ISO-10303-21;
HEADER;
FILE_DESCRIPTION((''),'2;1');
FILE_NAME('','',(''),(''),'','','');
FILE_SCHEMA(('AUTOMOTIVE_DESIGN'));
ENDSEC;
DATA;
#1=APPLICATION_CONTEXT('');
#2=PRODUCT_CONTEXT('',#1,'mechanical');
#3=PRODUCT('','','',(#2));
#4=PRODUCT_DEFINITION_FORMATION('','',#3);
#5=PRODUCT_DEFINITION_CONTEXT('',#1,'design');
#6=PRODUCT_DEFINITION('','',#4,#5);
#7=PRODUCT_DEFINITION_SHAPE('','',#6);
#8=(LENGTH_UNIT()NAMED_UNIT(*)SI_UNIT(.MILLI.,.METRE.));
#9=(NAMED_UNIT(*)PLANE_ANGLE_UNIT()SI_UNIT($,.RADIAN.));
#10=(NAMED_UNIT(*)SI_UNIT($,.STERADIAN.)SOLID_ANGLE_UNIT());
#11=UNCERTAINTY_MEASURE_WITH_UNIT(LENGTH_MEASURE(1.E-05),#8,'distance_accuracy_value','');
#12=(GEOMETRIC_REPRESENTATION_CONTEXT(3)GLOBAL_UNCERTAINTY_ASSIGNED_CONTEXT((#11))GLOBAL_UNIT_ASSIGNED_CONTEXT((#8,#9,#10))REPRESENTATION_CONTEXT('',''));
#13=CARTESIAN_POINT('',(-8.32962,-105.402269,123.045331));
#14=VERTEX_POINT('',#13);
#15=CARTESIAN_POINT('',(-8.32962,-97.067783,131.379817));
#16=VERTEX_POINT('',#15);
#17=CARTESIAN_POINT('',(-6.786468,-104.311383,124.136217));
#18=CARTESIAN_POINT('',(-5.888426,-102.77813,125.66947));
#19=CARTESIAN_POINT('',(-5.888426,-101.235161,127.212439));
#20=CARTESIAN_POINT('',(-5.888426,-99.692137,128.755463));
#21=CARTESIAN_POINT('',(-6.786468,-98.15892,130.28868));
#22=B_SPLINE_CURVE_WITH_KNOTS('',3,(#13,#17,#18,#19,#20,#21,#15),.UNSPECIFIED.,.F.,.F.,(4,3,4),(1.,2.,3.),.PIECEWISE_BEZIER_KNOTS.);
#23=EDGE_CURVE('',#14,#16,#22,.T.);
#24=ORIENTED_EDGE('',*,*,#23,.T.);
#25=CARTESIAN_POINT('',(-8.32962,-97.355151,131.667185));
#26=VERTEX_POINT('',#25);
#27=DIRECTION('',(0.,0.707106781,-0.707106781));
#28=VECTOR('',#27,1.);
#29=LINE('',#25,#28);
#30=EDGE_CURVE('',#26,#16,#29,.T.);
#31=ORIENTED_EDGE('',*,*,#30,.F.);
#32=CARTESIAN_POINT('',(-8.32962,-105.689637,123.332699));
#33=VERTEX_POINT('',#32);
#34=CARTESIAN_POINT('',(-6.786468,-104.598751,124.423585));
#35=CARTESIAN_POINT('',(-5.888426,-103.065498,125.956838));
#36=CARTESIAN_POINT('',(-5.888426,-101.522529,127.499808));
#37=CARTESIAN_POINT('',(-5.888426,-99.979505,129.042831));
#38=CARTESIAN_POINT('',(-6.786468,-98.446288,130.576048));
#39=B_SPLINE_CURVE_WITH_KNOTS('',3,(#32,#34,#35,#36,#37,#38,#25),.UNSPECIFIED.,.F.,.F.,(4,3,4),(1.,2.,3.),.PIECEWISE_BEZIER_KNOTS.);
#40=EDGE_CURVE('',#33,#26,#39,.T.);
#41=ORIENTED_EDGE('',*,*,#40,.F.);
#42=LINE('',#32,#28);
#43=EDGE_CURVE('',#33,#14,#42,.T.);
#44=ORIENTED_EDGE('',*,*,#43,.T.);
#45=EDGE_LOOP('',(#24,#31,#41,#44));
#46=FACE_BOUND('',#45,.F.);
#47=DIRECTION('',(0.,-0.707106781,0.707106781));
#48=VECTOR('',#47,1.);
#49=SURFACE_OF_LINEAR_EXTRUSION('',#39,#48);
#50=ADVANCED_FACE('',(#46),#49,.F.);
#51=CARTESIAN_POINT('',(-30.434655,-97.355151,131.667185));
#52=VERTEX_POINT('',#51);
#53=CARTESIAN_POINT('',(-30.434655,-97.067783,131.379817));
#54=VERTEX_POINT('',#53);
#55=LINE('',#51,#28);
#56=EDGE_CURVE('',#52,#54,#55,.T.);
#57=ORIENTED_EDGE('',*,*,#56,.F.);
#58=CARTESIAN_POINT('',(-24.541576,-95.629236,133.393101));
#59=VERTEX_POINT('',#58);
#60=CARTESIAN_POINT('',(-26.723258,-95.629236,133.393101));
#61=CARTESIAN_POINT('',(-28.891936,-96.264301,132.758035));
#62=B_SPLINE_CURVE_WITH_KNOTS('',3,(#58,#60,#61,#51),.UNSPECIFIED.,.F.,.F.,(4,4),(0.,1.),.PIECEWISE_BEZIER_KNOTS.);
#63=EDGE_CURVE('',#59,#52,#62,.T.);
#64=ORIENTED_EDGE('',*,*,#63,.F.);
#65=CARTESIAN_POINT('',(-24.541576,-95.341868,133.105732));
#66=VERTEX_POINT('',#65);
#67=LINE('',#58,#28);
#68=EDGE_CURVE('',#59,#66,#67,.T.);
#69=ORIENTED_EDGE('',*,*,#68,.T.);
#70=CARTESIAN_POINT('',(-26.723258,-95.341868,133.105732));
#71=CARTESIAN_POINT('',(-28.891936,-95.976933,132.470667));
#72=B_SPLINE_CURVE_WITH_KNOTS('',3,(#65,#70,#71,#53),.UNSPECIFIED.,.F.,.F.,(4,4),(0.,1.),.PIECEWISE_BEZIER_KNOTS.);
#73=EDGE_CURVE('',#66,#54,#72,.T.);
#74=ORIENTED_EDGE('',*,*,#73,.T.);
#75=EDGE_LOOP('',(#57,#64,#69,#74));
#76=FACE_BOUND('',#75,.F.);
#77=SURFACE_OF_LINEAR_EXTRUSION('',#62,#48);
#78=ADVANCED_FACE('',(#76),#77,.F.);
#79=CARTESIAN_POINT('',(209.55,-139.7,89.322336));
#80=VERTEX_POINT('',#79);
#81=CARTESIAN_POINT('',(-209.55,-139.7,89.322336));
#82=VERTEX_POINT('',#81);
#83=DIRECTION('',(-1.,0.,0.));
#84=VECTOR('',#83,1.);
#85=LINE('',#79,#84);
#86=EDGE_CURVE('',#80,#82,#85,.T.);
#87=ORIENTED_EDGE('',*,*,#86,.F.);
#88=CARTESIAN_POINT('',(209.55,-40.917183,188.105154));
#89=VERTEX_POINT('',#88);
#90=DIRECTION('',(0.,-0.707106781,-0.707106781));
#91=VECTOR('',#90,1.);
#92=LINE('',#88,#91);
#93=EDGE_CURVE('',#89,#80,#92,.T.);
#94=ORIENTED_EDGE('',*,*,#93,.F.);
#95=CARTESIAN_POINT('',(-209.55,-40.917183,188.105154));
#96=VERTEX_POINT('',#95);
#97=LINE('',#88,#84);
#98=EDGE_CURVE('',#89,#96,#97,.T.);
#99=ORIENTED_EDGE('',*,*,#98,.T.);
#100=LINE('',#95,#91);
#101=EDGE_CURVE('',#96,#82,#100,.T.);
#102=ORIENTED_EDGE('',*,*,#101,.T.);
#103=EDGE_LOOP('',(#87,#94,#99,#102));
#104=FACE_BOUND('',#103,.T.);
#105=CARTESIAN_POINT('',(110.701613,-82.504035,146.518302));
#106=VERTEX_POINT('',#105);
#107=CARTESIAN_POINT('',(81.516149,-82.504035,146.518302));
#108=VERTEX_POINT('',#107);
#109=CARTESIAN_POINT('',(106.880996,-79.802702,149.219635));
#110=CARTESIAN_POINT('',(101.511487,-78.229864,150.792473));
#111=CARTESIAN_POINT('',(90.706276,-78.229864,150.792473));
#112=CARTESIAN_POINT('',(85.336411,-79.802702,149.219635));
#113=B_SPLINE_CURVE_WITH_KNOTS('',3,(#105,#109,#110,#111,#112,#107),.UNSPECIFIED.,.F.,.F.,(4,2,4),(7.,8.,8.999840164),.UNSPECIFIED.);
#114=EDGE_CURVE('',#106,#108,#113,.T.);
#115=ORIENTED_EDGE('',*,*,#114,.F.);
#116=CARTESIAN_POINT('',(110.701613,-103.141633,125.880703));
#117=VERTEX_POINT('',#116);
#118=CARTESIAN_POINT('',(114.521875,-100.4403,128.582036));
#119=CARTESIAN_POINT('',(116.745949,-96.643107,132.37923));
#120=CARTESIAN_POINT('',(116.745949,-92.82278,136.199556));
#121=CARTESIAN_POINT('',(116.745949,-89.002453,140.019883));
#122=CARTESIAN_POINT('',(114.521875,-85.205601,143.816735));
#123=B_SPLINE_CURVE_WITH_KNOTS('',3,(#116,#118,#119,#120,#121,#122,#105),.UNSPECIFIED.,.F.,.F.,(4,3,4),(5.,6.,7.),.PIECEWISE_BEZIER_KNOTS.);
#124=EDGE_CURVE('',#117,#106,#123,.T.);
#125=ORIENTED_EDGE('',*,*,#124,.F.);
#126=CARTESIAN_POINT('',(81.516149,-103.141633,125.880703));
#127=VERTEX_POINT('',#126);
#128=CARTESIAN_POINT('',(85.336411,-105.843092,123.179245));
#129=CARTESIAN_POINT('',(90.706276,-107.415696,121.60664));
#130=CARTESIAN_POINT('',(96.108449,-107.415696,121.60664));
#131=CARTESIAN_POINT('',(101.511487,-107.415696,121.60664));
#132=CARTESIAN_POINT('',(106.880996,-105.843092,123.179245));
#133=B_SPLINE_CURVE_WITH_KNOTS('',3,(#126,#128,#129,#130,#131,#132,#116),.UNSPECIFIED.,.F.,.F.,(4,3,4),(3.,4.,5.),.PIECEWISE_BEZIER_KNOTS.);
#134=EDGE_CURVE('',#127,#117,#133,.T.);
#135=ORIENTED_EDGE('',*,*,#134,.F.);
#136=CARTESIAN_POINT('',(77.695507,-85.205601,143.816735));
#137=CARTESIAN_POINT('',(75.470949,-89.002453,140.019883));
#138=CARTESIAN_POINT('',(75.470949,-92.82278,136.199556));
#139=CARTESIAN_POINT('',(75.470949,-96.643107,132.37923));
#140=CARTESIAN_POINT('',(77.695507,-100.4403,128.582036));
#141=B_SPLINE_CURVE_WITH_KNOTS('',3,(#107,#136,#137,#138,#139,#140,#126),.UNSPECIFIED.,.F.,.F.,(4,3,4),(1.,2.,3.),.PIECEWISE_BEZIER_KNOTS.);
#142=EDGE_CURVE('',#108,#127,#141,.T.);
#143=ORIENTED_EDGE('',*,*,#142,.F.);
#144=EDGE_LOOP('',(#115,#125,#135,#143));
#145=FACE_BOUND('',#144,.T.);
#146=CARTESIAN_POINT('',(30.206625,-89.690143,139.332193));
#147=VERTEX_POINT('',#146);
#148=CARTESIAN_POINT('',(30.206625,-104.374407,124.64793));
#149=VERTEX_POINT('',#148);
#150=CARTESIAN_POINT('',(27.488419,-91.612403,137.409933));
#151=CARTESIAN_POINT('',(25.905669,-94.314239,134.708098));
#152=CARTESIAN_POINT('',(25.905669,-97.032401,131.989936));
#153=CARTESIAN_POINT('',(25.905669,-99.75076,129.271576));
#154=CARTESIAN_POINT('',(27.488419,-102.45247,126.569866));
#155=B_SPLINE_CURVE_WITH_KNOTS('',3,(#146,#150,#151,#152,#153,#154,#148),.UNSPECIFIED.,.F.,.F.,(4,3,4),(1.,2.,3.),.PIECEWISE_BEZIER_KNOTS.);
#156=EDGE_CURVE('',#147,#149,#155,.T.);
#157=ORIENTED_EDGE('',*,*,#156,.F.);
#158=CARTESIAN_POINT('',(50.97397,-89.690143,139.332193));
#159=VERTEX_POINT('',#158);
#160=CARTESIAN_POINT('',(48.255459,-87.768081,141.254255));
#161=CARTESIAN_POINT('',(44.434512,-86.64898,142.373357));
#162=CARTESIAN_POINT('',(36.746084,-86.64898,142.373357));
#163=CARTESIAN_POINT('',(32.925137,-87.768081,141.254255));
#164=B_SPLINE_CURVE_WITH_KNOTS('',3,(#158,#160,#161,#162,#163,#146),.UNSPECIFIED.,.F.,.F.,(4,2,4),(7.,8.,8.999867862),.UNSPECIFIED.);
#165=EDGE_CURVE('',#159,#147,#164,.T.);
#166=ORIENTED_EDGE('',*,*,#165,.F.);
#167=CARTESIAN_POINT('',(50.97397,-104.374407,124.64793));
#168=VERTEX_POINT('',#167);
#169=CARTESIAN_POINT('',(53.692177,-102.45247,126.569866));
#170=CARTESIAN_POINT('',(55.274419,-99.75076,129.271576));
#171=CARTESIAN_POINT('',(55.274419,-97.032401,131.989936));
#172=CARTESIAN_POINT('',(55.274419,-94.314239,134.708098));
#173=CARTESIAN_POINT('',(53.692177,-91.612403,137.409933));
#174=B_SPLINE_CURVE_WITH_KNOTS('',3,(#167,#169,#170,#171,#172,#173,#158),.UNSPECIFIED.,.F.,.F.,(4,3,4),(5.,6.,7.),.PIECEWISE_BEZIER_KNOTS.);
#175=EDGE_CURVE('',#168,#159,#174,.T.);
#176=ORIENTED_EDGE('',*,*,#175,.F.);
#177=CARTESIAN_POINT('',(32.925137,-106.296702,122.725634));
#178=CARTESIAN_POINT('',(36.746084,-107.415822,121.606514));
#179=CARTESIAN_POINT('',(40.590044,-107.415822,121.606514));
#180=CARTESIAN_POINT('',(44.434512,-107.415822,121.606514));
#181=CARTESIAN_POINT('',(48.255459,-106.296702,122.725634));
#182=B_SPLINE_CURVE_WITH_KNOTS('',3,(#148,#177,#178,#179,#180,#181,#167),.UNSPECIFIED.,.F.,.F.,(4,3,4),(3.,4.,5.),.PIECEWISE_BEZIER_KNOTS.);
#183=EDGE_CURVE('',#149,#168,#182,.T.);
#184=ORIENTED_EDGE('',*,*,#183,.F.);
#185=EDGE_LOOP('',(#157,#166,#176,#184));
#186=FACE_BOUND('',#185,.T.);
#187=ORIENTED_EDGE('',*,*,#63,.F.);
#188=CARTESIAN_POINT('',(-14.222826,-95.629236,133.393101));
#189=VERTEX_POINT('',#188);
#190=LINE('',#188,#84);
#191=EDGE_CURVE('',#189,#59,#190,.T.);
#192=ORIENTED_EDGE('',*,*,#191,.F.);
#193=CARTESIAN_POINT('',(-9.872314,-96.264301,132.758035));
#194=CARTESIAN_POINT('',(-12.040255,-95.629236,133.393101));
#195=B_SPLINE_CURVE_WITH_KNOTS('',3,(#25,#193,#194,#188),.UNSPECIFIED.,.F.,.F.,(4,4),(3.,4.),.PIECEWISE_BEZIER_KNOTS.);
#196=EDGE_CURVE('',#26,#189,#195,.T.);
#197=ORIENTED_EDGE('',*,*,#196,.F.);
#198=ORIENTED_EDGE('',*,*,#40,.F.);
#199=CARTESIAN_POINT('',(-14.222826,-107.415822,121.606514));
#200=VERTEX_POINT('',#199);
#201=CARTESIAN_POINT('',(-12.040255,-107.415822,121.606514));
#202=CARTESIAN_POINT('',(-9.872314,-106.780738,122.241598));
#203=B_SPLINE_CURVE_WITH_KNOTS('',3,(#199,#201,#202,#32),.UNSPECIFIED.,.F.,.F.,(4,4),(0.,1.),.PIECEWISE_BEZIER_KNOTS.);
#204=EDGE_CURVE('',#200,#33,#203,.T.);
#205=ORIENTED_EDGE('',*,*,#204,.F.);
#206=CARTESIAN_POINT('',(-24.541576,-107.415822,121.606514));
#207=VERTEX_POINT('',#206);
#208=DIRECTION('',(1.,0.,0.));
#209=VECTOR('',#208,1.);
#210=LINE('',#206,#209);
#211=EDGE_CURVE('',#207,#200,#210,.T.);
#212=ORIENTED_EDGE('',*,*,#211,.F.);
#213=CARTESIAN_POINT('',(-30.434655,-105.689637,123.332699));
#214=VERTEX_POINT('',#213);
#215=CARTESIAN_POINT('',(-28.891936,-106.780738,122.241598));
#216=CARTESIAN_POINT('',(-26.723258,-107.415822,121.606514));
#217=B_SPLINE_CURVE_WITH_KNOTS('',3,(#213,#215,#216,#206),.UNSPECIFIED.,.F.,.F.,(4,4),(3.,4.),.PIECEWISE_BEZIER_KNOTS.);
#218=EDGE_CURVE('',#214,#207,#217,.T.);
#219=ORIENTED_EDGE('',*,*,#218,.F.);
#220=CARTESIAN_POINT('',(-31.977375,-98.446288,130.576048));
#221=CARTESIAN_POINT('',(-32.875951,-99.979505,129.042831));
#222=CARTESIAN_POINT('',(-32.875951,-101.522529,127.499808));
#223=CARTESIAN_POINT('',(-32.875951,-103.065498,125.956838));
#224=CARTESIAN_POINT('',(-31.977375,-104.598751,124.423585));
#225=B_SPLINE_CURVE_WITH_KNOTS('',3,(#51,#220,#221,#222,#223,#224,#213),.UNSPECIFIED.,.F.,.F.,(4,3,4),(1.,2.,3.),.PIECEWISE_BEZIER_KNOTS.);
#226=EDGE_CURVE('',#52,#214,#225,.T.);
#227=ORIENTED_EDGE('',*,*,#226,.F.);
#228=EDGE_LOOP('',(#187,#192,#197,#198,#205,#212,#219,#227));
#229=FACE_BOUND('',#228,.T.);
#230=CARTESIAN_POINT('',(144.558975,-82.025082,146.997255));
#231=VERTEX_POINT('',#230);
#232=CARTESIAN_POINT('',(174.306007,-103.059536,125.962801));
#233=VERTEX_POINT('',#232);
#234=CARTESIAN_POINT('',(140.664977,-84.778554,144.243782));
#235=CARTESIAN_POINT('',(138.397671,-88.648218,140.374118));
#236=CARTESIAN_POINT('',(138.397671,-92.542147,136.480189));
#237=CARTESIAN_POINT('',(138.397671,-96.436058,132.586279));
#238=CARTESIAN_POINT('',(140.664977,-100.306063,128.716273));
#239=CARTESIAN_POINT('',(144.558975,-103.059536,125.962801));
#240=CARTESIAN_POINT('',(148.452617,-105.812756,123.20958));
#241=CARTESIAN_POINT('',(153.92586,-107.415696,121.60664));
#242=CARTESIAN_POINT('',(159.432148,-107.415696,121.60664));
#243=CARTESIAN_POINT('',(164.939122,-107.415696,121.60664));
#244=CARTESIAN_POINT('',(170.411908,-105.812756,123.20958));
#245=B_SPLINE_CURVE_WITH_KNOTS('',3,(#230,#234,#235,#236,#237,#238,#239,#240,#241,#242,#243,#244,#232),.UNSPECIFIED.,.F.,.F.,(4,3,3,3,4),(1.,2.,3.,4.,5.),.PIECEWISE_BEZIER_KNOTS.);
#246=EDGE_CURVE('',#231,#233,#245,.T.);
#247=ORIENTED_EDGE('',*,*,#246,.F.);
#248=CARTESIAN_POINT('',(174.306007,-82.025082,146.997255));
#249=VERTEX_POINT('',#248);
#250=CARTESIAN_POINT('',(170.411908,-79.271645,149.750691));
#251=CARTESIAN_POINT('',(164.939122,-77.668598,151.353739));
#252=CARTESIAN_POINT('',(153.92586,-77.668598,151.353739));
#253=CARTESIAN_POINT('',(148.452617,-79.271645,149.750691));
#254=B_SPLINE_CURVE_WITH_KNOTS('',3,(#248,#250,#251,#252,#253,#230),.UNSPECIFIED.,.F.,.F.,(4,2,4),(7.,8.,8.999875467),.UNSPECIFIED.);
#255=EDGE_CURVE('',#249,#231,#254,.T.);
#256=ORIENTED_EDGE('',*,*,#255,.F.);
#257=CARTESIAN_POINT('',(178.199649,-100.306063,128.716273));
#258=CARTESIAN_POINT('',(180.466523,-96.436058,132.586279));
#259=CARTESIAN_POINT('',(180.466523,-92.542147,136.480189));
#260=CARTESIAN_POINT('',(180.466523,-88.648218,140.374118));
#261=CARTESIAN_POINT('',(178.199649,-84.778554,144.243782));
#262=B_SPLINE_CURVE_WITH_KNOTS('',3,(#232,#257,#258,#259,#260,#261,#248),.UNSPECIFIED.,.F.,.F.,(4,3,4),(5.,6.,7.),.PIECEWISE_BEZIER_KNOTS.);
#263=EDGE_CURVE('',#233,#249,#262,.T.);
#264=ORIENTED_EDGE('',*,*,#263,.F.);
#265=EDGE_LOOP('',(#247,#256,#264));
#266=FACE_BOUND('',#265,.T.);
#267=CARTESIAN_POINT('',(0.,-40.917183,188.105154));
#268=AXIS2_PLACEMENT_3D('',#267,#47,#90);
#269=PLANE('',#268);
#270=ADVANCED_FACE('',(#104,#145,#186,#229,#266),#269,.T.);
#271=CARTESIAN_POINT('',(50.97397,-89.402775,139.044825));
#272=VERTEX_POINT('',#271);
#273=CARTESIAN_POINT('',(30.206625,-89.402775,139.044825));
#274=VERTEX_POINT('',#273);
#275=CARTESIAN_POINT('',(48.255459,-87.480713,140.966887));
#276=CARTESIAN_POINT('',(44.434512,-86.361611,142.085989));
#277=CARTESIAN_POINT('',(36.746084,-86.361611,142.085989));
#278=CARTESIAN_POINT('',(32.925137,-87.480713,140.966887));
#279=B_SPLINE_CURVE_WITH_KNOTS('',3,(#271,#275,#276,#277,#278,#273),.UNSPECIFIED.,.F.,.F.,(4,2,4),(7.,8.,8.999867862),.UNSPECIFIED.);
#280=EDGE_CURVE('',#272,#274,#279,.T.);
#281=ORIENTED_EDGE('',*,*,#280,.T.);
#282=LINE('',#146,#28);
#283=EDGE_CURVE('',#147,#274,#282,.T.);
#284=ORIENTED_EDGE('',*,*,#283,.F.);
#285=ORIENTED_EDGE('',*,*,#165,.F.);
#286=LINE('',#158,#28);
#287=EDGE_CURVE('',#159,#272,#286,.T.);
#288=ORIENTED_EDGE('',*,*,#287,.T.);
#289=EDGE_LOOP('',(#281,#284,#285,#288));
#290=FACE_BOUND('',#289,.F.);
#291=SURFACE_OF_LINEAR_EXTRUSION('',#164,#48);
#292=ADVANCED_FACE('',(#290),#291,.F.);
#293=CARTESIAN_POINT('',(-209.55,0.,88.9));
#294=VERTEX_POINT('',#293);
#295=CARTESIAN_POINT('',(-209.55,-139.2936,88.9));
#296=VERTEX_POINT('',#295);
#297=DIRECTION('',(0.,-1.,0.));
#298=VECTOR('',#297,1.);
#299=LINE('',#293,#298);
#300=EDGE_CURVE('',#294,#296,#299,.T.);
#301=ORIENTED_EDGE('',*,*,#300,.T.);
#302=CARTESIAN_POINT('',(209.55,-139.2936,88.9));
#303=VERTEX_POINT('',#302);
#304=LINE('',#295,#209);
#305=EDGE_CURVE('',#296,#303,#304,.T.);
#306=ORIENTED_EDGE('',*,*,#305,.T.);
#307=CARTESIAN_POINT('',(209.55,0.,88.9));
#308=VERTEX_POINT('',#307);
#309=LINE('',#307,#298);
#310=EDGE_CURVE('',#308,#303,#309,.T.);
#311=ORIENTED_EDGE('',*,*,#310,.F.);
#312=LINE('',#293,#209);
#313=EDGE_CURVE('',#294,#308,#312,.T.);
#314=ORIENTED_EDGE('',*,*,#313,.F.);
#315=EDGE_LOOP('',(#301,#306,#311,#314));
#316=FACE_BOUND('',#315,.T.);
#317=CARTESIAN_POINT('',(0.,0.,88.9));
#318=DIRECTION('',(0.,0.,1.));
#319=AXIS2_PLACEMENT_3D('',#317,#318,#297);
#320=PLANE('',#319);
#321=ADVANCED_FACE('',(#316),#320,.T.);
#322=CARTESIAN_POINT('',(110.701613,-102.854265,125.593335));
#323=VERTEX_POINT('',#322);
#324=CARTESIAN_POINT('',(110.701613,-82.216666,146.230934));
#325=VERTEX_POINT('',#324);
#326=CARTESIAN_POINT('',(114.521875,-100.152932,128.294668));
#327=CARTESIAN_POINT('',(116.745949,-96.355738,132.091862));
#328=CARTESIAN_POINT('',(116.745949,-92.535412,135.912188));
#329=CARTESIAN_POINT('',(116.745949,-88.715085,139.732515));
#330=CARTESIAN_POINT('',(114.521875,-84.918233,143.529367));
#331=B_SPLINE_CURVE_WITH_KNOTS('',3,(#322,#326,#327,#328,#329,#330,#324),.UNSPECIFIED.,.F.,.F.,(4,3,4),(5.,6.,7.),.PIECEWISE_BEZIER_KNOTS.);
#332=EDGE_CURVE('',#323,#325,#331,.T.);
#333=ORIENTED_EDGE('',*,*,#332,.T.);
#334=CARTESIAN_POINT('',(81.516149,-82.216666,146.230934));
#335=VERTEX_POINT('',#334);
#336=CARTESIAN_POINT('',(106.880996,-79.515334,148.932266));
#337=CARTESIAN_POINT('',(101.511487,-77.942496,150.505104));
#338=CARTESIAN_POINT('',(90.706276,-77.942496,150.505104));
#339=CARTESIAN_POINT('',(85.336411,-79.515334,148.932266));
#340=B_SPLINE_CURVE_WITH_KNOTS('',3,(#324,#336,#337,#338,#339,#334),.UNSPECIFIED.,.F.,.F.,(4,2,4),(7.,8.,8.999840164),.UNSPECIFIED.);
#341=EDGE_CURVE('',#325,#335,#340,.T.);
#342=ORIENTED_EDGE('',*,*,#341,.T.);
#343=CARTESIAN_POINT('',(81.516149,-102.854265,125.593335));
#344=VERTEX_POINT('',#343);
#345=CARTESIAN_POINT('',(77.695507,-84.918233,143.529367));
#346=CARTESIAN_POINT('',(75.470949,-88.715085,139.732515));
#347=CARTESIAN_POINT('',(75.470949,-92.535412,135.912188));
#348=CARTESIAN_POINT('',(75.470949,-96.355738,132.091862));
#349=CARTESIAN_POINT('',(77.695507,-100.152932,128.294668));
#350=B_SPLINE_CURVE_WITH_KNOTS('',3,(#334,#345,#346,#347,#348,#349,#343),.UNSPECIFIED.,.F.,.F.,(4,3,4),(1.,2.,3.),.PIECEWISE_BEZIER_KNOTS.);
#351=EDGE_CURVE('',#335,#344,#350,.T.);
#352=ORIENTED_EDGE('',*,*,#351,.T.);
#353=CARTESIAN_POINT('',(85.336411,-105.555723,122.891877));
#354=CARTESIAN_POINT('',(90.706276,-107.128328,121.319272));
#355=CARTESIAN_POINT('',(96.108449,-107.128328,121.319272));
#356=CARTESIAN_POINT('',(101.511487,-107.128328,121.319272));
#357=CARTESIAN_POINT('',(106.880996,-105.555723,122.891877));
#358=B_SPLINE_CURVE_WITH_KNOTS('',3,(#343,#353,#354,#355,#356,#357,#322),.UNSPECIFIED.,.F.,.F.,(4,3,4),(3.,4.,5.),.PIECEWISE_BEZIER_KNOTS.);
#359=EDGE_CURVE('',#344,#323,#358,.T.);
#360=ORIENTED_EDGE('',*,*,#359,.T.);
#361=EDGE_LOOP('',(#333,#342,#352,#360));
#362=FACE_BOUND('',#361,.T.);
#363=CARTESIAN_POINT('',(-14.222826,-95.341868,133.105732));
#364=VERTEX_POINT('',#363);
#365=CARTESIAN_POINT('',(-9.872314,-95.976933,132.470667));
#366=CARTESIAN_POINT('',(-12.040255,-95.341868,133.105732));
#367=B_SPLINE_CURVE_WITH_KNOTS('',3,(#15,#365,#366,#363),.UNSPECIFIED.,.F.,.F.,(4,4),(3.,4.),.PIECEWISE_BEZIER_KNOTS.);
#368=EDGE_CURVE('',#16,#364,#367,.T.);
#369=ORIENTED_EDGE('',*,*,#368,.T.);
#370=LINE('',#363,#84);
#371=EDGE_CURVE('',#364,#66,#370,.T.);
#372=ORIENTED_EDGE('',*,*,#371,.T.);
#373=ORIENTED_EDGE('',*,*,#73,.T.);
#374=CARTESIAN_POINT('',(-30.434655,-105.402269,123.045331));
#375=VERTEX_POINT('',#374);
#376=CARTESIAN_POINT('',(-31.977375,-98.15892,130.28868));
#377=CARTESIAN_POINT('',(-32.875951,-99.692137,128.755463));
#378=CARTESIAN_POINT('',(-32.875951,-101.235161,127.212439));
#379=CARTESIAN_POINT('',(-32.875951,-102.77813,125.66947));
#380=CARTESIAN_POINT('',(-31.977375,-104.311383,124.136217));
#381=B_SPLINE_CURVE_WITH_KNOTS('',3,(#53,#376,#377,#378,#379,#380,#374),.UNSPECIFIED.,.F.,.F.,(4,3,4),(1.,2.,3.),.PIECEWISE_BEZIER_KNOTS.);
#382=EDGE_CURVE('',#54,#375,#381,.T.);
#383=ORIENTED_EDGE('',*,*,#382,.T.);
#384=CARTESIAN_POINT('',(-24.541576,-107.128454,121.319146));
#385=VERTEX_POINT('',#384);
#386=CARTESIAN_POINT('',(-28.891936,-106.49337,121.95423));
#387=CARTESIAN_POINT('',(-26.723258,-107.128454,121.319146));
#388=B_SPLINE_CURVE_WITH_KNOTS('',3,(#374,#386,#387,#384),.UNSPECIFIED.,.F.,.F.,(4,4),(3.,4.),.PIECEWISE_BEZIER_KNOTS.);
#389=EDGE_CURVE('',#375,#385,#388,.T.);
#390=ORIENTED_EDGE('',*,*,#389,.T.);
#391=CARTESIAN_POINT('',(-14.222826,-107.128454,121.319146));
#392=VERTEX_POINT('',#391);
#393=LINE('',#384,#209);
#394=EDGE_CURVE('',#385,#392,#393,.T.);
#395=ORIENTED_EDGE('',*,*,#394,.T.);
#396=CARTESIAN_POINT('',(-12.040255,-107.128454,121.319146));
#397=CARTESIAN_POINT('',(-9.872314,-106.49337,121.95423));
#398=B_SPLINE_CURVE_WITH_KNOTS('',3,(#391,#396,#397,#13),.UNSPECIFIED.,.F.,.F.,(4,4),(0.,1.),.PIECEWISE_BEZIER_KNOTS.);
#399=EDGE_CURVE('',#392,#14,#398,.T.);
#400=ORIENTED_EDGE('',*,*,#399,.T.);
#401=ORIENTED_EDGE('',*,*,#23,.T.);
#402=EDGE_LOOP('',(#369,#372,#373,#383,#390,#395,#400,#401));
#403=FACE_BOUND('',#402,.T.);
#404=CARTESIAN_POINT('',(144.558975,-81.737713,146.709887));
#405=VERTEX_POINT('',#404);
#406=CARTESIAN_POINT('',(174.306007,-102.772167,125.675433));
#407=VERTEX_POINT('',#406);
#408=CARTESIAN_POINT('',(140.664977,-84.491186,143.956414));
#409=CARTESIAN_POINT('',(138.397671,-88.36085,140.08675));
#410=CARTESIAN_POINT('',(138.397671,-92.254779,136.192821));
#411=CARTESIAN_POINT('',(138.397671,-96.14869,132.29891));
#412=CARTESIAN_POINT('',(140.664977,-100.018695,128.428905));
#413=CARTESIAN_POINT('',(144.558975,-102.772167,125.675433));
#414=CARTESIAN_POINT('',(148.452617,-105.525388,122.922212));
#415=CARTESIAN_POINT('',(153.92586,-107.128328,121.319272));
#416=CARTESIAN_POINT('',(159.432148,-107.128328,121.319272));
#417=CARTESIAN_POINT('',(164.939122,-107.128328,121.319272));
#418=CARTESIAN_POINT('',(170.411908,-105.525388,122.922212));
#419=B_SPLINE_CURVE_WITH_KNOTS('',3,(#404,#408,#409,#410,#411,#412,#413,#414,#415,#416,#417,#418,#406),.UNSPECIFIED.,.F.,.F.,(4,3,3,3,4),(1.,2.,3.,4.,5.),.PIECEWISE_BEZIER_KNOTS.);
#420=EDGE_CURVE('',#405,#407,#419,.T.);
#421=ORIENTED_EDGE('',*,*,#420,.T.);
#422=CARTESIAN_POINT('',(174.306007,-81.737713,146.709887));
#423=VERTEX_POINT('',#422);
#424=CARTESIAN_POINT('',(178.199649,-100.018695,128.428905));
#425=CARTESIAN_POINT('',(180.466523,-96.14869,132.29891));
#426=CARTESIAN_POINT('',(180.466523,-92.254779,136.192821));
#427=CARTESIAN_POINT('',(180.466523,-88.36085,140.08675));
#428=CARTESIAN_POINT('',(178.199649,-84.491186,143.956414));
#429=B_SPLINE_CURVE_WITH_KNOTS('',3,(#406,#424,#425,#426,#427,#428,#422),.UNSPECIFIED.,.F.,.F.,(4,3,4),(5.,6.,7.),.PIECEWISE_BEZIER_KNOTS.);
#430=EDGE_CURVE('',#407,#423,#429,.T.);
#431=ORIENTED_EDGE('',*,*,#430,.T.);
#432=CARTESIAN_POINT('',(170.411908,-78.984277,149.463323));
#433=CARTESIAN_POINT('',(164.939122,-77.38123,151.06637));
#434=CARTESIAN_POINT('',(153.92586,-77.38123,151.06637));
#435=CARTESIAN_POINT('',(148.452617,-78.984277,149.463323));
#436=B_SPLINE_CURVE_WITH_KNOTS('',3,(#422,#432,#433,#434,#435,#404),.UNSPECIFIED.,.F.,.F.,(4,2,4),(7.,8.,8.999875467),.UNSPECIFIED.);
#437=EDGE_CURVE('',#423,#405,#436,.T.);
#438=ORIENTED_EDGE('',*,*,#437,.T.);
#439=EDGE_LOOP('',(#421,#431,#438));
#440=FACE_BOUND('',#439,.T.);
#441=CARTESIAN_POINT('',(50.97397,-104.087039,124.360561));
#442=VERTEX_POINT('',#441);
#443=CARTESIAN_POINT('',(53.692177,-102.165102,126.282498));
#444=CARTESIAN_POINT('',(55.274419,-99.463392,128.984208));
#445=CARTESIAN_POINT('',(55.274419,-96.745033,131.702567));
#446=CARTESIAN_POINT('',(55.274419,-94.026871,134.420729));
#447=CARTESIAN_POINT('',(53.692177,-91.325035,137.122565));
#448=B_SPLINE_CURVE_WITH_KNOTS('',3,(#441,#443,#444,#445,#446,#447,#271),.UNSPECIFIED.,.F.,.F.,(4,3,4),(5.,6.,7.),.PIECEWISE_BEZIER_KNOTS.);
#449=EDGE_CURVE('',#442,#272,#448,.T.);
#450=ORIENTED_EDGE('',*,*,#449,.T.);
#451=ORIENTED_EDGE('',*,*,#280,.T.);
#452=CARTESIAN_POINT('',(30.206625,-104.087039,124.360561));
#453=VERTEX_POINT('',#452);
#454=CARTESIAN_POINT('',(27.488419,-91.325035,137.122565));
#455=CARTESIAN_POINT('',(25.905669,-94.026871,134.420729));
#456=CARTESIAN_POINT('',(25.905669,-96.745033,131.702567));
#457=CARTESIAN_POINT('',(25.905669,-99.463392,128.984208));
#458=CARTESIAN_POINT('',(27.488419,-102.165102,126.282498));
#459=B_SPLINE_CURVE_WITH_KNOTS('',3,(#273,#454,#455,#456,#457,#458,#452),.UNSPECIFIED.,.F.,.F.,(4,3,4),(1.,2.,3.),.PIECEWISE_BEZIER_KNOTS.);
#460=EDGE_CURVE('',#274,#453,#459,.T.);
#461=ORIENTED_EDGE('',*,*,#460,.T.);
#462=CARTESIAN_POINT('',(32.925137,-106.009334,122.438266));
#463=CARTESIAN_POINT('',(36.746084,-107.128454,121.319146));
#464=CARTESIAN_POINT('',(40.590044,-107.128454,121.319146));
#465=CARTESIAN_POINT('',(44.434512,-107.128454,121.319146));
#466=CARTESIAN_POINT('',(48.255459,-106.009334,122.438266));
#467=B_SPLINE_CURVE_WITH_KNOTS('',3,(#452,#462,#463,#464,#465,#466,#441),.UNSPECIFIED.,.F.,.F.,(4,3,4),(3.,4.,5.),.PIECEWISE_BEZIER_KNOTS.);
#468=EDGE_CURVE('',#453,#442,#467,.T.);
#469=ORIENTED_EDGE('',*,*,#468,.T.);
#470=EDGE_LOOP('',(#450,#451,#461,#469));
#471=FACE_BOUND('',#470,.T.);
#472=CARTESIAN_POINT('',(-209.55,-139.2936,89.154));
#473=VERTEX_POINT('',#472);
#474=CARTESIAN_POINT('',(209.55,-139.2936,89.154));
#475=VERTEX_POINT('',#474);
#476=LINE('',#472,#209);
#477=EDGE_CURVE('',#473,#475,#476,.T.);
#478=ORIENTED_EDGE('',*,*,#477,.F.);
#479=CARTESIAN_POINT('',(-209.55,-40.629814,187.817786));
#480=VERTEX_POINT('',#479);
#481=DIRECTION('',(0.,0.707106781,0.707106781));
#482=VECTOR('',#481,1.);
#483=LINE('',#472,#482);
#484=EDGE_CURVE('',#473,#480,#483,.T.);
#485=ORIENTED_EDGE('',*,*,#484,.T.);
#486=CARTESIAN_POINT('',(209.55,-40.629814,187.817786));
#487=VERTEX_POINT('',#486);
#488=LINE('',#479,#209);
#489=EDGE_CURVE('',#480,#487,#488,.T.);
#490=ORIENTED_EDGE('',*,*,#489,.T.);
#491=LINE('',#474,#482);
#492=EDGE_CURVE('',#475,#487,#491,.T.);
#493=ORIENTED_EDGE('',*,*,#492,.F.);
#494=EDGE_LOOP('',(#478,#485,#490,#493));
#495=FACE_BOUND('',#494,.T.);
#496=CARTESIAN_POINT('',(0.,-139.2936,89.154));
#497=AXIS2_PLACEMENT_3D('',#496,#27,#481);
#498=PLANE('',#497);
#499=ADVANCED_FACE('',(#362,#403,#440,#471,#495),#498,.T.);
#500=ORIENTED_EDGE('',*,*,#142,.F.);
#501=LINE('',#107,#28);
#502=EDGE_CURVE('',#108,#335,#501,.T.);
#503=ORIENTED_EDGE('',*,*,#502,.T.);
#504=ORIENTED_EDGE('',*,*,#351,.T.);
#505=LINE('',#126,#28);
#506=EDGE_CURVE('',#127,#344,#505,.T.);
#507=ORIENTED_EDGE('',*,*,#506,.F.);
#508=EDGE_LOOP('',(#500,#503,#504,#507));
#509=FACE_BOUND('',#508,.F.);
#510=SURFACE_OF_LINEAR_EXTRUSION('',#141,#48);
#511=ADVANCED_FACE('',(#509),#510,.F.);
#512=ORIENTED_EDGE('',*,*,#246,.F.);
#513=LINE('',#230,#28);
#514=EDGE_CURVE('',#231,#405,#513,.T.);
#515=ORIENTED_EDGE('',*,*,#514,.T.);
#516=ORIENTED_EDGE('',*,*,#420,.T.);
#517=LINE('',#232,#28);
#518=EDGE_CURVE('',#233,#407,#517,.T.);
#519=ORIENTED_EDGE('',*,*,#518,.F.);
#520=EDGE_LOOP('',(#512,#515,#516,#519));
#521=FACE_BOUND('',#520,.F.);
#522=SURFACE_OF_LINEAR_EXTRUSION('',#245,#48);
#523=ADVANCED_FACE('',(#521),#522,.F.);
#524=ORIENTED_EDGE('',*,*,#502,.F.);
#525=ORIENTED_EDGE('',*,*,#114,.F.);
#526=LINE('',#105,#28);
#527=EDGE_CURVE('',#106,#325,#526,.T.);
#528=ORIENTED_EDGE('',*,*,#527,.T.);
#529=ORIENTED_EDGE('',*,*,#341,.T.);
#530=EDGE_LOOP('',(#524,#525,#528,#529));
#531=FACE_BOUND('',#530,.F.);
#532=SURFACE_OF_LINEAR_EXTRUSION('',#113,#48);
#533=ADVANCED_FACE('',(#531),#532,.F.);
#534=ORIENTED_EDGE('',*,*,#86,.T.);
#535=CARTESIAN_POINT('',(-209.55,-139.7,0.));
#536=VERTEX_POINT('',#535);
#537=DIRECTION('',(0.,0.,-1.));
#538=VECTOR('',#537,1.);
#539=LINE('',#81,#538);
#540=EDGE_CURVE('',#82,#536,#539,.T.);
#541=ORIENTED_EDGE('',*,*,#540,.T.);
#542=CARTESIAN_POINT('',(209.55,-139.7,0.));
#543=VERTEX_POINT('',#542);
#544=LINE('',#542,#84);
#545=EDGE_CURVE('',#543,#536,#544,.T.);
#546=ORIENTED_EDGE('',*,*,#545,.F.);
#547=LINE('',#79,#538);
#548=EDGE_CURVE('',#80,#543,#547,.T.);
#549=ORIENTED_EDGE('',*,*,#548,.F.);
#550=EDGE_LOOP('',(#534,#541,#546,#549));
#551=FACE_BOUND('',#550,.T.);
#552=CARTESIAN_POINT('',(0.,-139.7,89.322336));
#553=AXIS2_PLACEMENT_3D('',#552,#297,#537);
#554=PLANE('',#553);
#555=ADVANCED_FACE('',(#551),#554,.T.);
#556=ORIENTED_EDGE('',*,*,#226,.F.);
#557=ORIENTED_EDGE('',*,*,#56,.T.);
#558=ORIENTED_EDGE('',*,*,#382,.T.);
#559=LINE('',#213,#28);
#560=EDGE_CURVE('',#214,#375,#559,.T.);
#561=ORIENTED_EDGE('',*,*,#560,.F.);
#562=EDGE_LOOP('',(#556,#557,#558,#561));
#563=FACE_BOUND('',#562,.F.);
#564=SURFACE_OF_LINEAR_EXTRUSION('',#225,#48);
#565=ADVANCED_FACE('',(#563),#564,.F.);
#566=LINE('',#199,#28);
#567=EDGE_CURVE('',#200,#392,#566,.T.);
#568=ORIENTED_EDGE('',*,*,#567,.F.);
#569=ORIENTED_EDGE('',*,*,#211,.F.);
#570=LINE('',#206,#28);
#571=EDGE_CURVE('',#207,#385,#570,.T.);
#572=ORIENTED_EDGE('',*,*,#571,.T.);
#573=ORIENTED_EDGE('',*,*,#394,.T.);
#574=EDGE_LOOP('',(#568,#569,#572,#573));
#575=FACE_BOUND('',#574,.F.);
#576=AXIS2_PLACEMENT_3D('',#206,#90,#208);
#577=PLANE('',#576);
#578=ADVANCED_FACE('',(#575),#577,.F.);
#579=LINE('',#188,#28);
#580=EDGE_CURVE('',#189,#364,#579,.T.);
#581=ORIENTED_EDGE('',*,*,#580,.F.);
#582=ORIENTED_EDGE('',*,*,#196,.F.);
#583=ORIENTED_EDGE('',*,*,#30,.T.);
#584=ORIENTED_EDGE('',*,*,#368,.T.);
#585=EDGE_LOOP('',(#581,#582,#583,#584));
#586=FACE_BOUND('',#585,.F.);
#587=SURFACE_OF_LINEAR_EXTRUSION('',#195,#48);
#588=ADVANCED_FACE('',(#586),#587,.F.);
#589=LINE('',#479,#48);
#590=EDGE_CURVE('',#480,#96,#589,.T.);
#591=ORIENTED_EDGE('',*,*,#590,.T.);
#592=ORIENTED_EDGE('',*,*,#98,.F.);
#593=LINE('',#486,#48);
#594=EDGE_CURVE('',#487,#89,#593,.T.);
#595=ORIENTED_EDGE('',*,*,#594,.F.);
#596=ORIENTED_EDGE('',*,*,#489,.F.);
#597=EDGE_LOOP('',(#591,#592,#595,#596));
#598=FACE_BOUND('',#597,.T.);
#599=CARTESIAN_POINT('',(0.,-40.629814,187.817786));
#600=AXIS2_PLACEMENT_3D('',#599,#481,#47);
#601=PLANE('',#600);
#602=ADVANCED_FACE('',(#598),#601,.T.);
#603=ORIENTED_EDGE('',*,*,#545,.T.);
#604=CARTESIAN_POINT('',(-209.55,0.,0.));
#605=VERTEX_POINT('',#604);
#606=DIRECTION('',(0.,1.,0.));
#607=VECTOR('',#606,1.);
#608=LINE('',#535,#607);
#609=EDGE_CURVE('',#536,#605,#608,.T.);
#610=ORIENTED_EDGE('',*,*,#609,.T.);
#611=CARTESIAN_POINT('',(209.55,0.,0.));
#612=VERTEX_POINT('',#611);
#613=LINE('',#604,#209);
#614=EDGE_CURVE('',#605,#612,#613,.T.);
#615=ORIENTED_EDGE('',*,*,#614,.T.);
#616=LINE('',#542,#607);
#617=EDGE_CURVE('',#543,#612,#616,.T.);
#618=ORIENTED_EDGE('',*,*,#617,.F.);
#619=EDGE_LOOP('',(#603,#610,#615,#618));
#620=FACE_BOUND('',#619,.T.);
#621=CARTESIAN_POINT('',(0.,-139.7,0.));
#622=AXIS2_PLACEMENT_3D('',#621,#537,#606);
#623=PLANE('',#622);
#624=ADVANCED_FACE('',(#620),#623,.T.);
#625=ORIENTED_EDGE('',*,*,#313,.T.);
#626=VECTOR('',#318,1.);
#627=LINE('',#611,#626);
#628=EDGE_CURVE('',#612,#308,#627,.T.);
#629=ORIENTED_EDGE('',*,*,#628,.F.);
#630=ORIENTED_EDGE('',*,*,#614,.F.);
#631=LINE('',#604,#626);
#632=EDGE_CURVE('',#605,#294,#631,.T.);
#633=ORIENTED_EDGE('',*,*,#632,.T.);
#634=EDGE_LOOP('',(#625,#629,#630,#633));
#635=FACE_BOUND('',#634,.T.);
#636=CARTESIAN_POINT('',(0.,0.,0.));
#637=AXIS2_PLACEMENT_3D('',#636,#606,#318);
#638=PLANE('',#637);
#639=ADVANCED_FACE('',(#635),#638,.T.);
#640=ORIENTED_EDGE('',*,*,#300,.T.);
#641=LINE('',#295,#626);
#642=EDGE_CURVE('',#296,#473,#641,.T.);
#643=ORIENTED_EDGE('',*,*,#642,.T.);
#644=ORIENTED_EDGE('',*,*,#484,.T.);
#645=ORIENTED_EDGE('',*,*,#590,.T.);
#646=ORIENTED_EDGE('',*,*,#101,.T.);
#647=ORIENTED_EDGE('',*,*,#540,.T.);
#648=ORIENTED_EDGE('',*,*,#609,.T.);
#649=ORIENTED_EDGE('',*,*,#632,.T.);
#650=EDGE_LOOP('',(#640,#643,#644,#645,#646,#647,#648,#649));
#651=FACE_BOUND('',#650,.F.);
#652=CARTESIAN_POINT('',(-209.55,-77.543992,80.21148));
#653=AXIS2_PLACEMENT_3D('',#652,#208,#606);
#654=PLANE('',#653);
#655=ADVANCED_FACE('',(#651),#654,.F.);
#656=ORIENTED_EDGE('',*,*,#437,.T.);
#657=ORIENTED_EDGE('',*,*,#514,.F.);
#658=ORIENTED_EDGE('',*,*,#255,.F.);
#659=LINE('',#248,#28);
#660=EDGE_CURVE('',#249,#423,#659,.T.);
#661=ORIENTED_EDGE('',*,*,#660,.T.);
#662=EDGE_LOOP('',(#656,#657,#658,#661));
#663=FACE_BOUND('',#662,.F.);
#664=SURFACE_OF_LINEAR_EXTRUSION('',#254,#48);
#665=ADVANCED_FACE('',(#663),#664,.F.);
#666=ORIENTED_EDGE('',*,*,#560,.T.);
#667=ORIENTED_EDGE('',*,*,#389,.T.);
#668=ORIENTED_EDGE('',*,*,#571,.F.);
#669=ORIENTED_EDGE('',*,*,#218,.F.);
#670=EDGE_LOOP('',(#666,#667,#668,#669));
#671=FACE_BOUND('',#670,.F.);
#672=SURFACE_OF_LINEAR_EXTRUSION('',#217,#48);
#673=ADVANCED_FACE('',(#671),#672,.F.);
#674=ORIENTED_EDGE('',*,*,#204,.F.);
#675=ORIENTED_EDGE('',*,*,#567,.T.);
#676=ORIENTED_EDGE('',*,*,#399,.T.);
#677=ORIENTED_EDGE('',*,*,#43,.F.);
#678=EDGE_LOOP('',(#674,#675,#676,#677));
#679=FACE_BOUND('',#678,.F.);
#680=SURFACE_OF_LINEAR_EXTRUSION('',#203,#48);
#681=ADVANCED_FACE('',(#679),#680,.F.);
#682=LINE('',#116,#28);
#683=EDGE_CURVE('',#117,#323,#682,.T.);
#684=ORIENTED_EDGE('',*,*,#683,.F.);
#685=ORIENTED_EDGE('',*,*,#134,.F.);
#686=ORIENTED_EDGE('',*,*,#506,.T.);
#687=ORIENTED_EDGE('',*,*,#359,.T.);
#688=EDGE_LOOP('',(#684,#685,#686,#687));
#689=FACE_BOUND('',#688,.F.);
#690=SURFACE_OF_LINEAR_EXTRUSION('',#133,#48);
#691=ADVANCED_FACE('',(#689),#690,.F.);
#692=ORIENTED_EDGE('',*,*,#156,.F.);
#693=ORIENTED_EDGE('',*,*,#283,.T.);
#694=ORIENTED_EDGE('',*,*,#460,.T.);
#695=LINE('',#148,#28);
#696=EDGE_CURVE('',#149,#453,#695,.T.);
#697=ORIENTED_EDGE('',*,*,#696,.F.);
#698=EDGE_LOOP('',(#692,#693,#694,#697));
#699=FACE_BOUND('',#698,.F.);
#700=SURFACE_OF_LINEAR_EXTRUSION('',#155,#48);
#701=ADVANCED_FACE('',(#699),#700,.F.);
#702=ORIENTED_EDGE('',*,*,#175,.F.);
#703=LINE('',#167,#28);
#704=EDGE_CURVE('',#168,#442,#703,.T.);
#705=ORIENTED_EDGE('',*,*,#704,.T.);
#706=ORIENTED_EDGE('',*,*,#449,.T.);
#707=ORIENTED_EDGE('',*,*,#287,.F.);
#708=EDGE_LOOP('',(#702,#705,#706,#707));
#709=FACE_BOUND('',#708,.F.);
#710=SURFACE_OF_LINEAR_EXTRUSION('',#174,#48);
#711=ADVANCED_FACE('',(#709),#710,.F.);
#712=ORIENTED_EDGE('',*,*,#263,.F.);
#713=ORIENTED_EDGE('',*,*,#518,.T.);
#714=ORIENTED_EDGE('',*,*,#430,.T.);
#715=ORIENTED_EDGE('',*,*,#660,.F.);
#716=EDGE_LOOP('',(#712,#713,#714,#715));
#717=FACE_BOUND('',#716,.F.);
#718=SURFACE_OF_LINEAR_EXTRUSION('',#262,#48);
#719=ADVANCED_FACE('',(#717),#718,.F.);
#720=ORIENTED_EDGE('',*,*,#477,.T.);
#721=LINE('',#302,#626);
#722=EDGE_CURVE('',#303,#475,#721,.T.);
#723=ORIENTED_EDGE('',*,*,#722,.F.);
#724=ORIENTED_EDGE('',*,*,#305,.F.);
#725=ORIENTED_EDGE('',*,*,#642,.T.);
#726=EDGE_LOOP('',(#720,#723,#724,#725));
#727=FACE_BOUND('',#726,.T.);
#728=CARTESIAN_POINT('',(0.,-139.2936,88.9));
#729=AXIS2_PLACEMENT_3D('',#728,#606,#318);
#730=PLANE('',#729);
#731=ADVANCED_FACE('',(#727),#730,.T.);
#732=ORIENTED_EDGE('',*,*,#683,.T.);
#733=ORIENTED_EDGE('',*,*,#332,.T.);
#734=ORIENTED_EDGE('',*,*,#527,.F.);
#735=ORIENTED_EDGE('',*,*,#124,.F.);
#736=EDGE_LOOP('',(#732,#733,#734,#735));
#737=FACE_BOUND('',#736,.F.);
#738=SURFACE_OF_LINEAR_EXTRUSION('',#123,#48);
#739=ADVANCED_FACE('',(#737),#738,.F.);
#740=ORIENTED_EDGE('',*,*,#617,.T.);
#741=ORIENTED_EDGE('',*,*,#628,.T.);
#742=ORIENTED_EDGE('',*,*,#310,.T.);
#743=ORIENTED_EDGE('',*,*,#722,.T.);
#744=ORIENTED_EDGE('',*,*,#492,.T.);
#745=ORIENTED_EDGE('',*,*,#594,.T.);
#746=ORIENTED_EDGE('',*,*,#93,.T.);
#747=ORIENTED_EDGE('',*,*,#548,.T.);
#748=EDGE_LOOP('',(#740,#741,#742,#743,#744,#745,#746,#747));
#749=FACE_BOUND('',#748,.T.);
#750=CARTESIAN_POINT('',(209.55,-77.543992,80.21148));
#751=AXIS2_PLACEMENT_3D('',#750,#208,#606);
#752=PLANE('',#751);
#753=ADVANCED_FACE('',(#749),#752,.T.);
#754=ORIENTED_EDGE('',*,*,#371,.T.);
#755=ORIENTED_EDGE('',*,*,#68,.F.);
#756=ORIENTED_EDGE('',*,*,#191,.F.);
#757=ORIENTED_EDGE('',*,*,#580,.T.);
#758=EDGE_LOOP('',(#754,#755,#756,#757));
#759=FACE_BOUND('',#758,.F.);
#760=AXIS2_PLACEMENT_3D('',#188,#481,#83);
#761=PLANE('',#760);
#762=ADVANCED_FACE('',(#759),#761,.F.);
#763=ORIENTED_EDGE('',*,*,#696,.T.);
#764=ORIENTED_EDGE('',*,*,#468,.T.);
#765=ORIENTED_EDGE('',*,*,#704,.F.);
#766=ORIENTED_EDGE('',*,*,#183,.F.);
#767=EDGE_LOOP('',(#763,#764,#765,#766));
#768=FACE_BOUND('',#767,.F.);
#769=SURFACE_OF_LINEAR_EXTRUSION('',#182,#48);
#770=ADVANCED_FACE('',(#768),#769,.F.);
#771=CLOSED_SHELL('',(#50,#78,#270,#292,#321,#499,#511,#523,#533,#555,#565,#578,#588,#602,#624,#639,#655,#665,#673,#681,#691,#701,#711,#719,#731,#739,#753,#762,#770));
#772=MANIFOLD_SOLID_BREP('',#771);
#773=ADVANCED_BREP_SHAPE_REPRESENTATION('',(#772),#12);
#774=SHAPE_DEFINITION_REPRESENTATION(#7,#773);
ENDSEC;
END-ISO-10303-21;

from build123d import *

# Parameters (mm, degrees)
F1_DEPTH = 209.55
F3_DEPTH = 0.4064


# Not quite as in the source:
# - the dataset's text gives a spline's control points without its knots; the knots are read off the source's solid


with BuildPart() as f1:
    # F0 (on Right) → F1 (new body, symmetric)
    with BuildSketch(Plane.YZ):
        Polygon((-139.7, 0), (0, 0), (0, 88.9), (-139.2936, 88.9), (-139.2936, 89.154), (-40.6298144724, 187.8177855276), (-40.9171826682, 188.1051537235), (-139.7, 89.3223363917), align=None)
    extrude(amount=F1_DEPTH, both=True)

    # F2 (on face) → F3 (cut, through all)
    with BuildSketch(Plane(origin=(0, -114.5111681959, 114.5111681959), x_dir=(1, 0, 0), z_dir=(0, -0.7071067812, 0.7071067812))):
        with BuildLine():
            add(Edge.make_bspline(
                [(-30.4346554714, 12.4755289708), (-28.8919356714, 10.9324789708), (-26.7232582714, 10.0343349708), (-24.5415760714, 10.0343349708)],
                knots=[3, 3, 3, 3, 4, 4, 4, 4], degree=3))
            Line((-24.5415760714, 10.0343349708), (-14.2228260714, 10.0343349708))
            add(Edge.make_bspline(
                [(-14.2228260714, 10.0343349708), (-12.0402548714, 10.0343349708), (-9.8723140714, 10.9324789708), (-8.3296196714, 12.4755289708)],
                knots=[0, 0, 0, 0, 1, 1, 1, 1], degree=3))
            add(Edge.make_bspline(
                [(-8.3296196714, 12.4755289708), (-6.7864680714, 14.0182741708), (-5.8884256714, 16.1866213708), (-5.8884256714, 18.3687099708), (-5.8884256714, 20.5508747708), (-6.7864680714, 22.7191711708), (-8.3296196714, 24.2622719708)],
                knots=[1, 1, 1, 1, 2, 2, 2, 3, 3, 3, 3], degree=3))
            add(Edge.make_bspline(
                [(-8.3296196714, 24.2622719708), (-9.8723140714, 25.8049663708), (-12.0402548714, 26.7030849708), (-14.2228260714, 26.7030849708)],
                knots=[3, 3, 3, 3, 4, 4, 4, 4], degree=3))
            Line((-14.2228260714, 26.7030849708), (-24.5415760714, 26.7030849708))
            add(Edge.make_bspline(
                [(-24.5415760714, 26.7030849708), (-26.7232582714, 26.7030849708), (-28.8919356714, 25.8049663708), (-30.4346554714, 24.2622719708)],
                knots=[0, 0, 0, 0, 1, 1, 1, 1], degree=3))
            add(Edge.make_bspline(
                [(-30.4346554714, 24.2622719708), (-31.9773752714, 22.7191711708), (-32.8759510714, 20.5508747708), (-32.8759510714, 18.3687099708), (-32.8759510714, 16.1866213708), (-31.9773752714, 14.0182741708), (-30.4346554714, 12.4755289708)],
                knots=[1, 1, 1, 1, 2, 2, 2, 3, 3, 3, 3], degree=3))
        make_face()
        with BuildLine():
            add(Edge.make_bspline(
                [(50.9739701286, 35.1022299708), (48.2554589286, 37.8204363708), (44.4345115286, 39.4030849708), (40.5900437286, 39.4030849708)],
                knots=[7, 7, 7, 7, 8, 8, 8, 8], degree=3))
            add(Edge.make_bspline(
                [(40.5900437286, 39.4030849708), (36.7460839286, 39.4030849708), (32.9251365286, 37.8204363708), (30.2066253286, 35.1022299708)],
                knots=[0, 0, 0, 0, 1, 1, 1, 1], degree=3))
            add(Edge.make_bspline(
                [(30.2066253286, 35.1022299708), (27.4884189286, 32.3837441708), (25.9056687286, 28.5627713708), (25.9056687286, 24.7187099708), (25.9056687286, 20.8743691708), (27.4884189286, 17.0535741708), (30.2066253286, 14.3355455708)],
                knots=[1, 1, 1, 1, 2, 2, 2, 3, 3, 3, 3], degree=3))
            add(Edge.make_bspline(
                [(30.2066253286, 14.3355455708), (32.9251365286, 11.6170089708), (36.7460839286, 10.0343349708), (40.5900437286, 10.0343349708), (44.4345115286, 10.0343349708), (48.2554589286, 11.6170089708), (50.9739701286, 14.3355455708)],
                knots=[3, 3, 3, 3, 4, 4, 4, 5, 5, 5, 5], degree=3))
            add(Edge.make_bspline(
                [(50.9739701286, 14.3355455708), (53.6921765286, 17.0535741708), (55.2744187286, 20.8743691708), (55.2744187286, 24.7187099708), (55.2744187286, 28.5627713708), (53.6921765286, 32.3837441708), (50.9739701286, 35.1022299708)],
                knots=[5, 5, 5, 5, 6, 6, 6, 7, 7, 7, 7], degree=3))
        make_face()
        with BuildLine():
            add(Edge.make_bspline(
                [(110.7016129286, 45.2649223708), (106.8809957286, 49.0851839708), (101.5114865286, 51.3095127708), (96.1084493286, 51.3095127708)],
                knots=[7, 7, 7, 7, 8, 8, 8, 8], degree=3))
            add(Edge.make_bspline(
                [(96.1084493286, 51.3095127708), (90.7062757286, 51.3095127708), (85.3364109286, 49.0851839708), (81.5161493286, 45.2649223708)],
                knots=[0, 0, 0, 0, 1, 1, 1, 1], degree=3))
            add(Edge.make_bspline(
                [(81.5161493286, 45.2649223708), (77.6955067286, 41.4443305708), (75.4709493286, 36.0747705708), (75.4709493286, 30.6720127708), (75.4709493286, 25.2692549708), (77.6955067286, 19.8992123708), (81.5161493286, 16.0789507708)],
                knots=[1, 1, 1, 1, 2, 2, 2, 3, 3, 3, 3], degree=3))
            add(Edge.make_bspline(
                [(81.5161493286, 16.0789507708), (85.3364109286, 12.2585113708), (90.7062757286, 10.0345127708), (96.1084493286, 10.0345127708), (101.5114865286, 10.0345127708), (106.8809957286, 12.2585113708), (110.7016129286, 16.0789507708)],
                knots=[3, 3, 3, 3, 4, 4, 4, 5, 5, 5, 5], degree=3))
            add(Edge.make_bspline(
                [(110.7016129286, 16.0789507708), (114.5218745286, 19.8992123708), (116.7459493286, 25.2692549708), (116.7459493286, 30.6720127708), (116.7459493286, 36.0747705708), (114.5218745286, 41.4443305708), (110.7016129286, 45.2649223708)],
                knots=[5, 5, 5, 5, 6, 6, 6, 7, 7, 7, 7], degree=3))
        make_face()
        with BuildLine():
            add(Edge.make_bspline(
                [(174.3060069286, 45.9422641708), (170.4119075286, 49.8362111708), (164.9391219286, 52.1032627708), (159.4321479286, 52.1032627708)],
                knots=[7, 7, 7, 7, 8, 8, 8, 8], degree=3))
            add(Edge.make_bspline(
                [(159.4321479286, 52.1032627708), (153.9258597286, 52.1032627708), (148.4526169286, 49.8362111708), (144.5589747286, 45.9422641708)],
                knots=[0, 0, 0, 0, 1, 1, 1, 1], degree=3))
            add(Edge.make_bspline(
                [(144.5589747286, 45.9422641708), (140.6649769286, 42.0482663708), (138.3976713286, 36.5757347708), (138.3976713286, 31.0688877708), (138.3976713286, 25.5620661708), (140.6649769286, 20.0890519708), (144.5589747286, 16.1950541708), (148.4526169286, 12.3014119708), (153.9258597286, 10.0345127708), (159.4321479286, 10.0345127708), (164.9391219286, 10.0345127708), (170.4119075286, 12.3014119708), (174.3060069286, 16.1950541708)],
                knots=[1, 1, 1, 1, 2, 2, 2, 3, 3, 3, 4, 4, 4, 5, 5, 5, 5], degree=3))
            add(Edge.make_bspline(
                [(174.3060069286, 16.1950541708), (178.1996491286, 20.0890519708), (180.4665229286, 25.5620661708), (180.4665229286, 31.0688877708), (180.4665229286, 36.5757347708), (178.1996491286, 42.0482663708), (174.3060069286, 45.9422641708)],
                knots=[5, 5, 5, 5, 6, 6, 6, 7, 7, 7, 7], degree=3))
        make_face()
    extrude(amount=-F3_DEPTH, mode=Mode.SUBTRACT)


solid = f1.part
